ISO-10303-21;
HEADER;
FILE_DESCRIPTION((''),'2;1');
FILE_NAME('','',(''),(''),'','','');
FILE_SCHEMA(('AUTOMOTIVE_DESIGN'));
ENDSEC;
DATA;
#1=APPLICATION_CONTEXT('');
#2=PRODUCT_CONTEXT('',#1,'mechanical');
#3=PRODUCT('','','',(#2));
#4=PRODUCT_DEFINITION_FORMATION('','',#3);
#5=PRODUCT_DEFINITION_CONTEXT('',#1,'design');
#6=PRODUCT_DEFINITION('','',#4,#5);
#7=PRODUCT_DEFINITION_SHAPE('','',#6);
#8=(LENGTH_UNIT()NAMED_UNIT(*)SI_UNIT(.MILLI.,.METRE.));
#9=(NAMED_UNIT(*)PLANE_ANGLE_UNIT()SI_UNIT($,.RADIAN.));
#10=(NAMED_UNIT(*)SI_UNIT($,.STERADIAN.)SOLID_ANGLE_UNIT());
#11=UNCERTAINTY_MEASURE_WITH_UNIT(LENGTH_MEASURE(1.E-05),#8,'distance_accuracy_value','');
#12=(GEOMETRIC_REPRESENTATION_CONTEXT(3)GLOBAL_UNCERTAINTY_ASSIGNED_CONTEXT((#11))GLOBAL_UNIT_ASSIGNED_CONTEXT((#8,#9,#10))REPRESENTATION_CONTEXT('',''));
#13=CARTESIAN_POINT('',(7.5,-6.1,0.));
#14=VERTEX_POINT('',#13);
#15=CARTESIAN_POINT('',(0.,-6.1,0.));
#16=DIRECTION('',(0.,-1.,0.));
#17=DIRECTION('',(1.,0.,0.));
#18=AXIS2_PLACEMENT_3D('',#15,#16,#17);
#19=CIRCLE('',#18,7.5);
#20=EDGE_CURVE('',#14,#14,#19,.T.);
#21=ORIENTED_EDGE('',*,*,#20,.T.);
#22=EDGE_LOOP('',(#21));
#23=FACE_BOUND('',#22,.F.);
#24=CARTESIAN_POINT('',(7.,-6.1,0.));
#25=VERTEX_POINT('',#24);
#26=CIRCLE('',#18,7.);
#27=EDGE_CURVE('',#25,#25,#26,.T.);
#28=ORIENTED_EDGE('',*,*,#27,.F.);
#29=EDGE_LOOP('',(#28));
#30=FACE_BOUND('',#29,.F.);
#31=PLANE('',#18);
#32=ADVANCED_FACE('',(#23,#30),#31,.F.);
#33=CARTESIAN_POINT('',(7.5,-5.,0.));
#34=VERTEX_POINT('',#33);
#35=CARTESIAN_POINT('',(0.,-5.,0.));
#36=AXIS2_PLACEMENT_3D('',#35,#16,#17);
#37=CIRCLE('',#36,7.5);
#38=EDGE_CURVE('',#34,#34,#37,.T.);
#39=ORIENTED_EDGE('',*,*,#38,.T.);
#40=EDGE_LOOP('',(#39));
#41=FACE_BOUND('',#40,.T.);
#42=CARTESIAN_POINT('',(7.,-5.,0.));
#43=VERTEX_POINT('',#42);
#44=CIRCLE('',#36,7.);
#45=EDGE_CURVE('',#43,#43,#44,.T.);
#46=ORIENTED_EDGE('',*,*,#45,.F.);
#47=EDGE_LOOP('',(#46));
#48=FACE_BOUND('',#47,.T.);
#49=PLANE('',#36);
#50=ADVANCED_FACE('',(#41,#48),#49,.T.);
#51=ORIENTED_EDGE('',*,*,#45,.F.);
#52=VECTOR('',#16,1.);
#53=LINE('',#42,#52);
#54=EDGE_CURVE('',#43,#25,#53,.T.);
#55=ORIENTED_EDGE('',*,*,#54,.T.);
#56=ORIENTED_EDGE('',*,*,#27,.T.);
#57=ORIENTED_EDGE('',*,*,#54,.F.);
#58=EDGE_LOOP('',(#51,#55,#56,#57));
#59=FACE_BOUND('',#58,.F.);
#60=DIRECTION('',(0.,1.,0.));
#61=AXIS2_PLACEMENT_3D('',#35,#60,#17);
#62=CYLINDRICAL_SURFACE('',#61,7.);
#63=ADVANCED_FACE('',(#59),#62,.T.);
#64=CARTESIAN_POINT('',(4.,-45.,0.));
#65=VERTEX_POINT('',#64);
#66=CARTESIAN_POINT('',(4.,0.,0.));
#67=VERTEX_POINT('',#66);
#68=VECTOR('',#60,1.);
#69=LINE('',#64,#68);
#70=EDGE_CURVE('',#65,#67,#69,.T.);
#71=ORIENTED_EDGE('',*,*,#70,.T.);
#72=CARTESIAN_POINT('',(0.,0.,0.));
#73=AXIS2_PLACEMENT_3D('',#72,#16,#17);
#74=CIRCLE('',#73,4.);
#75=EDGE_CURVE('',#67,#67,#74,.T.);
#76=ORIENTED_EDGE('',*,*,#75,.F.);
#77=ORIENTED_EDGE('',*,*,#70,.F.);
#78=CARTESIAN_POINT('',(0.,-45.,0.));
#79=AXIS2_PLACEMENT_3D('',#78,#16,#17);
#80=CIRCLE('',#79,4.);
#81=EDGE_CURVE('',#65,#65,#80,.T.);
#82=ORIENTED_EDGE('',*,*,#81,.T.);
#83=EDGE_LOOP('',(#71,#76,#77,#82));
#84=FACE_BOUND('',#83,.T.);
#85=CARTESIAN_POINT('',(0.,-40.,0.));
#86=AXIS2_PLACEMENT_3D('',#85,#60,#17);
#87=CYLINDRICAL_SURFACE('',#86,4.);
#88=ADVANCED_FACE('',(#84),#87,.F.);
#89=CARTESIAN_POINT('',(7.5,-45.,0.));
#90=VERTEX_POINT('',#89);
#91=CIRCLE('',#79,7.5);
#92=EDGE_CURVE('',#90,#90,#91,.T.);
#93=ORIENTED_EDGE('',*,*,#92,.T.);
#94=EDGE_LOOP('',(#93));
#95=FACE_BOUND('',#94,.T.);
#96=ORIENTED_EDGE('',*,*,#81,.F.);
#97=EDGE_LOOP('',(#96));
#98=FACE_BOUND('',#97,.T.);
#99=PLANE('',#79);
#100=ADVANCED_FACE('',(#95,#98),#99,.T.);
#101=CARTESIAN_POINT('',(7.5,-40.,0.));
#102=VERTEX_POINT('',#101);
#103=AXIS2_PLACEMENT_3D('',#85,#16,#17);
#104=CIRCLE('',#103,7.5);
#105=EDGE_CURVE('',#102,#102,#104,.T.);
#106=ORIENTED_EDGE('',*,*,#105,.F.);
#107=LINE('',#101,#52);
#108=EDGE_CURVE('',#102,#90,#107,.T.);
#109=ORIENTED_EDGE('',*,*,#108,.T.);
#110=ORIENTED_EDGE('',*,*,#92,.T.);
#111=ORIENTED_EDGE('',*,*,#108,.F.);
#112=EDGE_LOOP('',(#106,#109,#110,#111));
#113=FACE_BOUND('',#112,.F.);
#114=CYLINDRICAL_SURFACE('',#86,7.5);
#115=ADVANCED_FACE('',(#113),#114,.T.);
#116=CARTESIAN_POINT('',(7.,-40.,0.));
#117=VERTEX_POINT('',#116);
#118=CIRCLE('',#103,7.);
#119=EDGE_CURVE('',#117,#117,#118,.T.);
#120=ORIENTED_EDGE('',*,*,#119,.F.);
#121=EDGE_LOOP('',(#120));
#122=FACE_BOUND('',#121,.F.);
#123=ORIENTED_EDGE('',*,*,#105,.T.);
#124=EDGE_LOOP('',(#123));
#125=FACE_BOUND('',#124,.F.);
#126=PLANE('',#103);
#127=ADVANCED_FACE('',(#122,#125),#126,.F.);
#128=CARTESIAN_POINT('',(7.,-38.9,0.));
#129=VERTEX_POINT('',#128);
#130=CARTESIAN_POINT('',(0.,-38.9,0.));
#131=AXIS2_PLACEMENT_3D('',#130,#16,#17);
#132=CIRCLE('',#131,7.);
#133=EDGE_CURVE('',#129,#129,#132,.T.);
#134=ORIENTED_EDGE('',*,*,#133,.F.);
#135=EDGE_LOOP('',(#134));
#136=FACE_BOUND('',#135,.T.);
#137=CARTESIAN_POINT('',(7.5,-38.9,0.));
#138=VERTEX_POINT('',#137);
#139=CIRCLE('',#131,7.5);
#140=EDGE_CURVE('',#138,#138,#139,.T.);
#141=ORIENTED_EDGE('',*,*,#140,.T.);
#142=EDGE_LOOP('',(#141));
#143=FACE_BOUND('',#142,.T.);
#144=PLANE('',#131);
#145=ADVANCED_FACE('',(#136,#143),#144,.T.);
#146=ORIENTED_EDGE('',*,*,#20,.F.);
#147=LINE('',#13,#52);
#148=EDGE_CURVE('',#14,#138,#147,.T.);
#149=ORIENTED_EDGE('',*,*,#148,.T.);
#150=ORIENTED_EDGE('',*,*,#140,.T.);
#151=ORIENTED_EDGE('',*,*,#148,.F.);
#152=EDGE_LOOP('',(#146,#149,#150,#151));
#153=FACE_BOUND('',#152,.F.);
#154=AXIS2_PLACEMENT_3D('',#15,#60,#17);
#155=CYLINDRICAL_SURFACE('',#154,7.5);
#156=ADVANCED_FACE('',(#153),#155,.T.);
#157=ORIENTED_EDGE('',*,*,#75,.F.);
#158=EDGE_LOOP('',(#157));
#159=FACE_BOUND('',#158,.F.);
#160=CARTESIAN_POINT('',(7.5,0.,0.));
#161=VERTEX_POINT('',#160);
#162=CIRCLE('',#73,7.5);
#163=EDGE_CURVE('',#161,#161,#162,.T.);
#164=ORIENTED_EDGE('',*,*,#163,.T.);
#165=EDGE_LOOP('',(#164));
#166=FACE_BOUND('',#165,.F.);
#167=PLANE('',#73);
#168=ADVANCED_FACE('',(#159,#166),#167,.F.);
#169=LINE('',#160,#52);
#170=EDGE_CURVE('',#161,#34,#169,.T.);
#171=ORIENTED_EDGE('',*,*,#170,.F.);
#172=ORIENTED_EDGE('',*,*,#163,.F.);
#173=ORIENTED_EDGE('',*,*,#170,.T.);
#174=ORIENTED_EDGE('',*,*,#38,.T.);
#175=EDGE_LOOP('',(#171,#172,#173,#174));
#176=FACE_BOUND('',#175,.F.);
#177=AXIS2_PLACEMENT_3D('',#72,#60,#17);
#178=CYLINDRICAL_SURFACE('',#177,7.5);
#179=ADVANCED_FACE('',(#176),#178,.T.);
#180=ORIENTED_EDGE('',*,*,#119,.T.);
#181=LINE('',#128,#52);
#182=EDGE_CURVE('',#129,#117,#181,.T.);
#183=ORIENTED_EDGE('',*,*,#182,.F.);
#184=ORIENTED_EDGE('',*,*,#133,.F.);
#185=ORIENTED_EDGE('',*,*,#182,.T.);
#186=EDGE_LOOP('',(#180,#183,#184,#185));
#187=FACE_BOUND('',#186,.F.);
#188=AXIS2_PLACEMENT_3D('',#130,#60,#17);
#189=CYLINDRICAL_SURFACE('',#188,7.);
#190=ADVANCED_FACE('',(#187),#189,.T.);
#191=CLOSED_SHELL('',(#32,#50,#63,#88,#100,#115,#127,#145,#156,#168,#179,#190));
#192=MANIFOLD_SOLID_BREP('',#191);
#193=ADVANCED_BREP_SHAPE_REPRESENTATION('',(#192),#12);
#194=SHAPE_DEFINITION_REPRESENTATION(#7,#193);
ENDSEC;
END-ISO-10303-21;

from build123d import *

# Parameters (mm, degrees)
F0_R     = 7.5
F0_R_2   = 4
F1_DEPTH = 5
F2_R     = 7
F2_R_2   = 4
F3_DEPTH = 1.1
F4_R     = 7.5
F4_R_2   = 7
F4_R_3   = 4
F5_DEPTH = 32.8
F6_R     = 7
F6_R_2   = 4
F7_DEPTH = 1.1
F8_R     = 7.5
F8_R_2   = 7
F8_R_3   = 4
F9_DEPTH = 5


# Not quite as in the source:
# - a feature names something its author has since deleted; it is built from what else it names


with BuildPart() as f1:
    # F0 (on Front) → F1 (new body)
    with BuildSketch(Plane.XZ):
        Circle(F0_R)
        Circle(F0_R_2, mode=Mode.SUBTRACT)
    extrude(amount=F1_DEPTH)

    # F2 (on face) → F3 (join)
    with BuildSketch(Plane.XZ.offset(5)):
        Circle(F2_R)
        Circle(F2_R_2, mode=Mode.SUBTRACT)
    extrude(amount=F3_DEPTH)

    # F4 (on face) → F5 (join)
    with BuildSketch(Plane.XZ.offset(6.1)):
        Circle(F4_R)
        Circle(F4_R_2, mode=Mode.SUBTRACT)
        Circle(F4_R_2)
        Circle(F4_R_3, mode=Mode.SUBTRACT)
    extrude(amount=F5_DEPTH)

    # F6 (on face) → F7 (join)
    with BuildSketch(Plane.XZ.offset(38.9)):
        Circle(F6_R)
        Circle(F6_R_2, mode=Mode.SUBTRACT)
    extrude(amount=F7_DEPTH)

    # F8 (on face) → F9 (join)
    with BuildSketch(Plane.XZ.offset(40)):
        Circle(F8_R)
        Circle(F8_R_2, mode=Mode.SUBTRACT)
        Circle(F8_R_2)
        Circle(F8_R_3, mode=Mode.SUBTRACT)
    extrude(amount=F9_DEPTH)


solid = f1.part
